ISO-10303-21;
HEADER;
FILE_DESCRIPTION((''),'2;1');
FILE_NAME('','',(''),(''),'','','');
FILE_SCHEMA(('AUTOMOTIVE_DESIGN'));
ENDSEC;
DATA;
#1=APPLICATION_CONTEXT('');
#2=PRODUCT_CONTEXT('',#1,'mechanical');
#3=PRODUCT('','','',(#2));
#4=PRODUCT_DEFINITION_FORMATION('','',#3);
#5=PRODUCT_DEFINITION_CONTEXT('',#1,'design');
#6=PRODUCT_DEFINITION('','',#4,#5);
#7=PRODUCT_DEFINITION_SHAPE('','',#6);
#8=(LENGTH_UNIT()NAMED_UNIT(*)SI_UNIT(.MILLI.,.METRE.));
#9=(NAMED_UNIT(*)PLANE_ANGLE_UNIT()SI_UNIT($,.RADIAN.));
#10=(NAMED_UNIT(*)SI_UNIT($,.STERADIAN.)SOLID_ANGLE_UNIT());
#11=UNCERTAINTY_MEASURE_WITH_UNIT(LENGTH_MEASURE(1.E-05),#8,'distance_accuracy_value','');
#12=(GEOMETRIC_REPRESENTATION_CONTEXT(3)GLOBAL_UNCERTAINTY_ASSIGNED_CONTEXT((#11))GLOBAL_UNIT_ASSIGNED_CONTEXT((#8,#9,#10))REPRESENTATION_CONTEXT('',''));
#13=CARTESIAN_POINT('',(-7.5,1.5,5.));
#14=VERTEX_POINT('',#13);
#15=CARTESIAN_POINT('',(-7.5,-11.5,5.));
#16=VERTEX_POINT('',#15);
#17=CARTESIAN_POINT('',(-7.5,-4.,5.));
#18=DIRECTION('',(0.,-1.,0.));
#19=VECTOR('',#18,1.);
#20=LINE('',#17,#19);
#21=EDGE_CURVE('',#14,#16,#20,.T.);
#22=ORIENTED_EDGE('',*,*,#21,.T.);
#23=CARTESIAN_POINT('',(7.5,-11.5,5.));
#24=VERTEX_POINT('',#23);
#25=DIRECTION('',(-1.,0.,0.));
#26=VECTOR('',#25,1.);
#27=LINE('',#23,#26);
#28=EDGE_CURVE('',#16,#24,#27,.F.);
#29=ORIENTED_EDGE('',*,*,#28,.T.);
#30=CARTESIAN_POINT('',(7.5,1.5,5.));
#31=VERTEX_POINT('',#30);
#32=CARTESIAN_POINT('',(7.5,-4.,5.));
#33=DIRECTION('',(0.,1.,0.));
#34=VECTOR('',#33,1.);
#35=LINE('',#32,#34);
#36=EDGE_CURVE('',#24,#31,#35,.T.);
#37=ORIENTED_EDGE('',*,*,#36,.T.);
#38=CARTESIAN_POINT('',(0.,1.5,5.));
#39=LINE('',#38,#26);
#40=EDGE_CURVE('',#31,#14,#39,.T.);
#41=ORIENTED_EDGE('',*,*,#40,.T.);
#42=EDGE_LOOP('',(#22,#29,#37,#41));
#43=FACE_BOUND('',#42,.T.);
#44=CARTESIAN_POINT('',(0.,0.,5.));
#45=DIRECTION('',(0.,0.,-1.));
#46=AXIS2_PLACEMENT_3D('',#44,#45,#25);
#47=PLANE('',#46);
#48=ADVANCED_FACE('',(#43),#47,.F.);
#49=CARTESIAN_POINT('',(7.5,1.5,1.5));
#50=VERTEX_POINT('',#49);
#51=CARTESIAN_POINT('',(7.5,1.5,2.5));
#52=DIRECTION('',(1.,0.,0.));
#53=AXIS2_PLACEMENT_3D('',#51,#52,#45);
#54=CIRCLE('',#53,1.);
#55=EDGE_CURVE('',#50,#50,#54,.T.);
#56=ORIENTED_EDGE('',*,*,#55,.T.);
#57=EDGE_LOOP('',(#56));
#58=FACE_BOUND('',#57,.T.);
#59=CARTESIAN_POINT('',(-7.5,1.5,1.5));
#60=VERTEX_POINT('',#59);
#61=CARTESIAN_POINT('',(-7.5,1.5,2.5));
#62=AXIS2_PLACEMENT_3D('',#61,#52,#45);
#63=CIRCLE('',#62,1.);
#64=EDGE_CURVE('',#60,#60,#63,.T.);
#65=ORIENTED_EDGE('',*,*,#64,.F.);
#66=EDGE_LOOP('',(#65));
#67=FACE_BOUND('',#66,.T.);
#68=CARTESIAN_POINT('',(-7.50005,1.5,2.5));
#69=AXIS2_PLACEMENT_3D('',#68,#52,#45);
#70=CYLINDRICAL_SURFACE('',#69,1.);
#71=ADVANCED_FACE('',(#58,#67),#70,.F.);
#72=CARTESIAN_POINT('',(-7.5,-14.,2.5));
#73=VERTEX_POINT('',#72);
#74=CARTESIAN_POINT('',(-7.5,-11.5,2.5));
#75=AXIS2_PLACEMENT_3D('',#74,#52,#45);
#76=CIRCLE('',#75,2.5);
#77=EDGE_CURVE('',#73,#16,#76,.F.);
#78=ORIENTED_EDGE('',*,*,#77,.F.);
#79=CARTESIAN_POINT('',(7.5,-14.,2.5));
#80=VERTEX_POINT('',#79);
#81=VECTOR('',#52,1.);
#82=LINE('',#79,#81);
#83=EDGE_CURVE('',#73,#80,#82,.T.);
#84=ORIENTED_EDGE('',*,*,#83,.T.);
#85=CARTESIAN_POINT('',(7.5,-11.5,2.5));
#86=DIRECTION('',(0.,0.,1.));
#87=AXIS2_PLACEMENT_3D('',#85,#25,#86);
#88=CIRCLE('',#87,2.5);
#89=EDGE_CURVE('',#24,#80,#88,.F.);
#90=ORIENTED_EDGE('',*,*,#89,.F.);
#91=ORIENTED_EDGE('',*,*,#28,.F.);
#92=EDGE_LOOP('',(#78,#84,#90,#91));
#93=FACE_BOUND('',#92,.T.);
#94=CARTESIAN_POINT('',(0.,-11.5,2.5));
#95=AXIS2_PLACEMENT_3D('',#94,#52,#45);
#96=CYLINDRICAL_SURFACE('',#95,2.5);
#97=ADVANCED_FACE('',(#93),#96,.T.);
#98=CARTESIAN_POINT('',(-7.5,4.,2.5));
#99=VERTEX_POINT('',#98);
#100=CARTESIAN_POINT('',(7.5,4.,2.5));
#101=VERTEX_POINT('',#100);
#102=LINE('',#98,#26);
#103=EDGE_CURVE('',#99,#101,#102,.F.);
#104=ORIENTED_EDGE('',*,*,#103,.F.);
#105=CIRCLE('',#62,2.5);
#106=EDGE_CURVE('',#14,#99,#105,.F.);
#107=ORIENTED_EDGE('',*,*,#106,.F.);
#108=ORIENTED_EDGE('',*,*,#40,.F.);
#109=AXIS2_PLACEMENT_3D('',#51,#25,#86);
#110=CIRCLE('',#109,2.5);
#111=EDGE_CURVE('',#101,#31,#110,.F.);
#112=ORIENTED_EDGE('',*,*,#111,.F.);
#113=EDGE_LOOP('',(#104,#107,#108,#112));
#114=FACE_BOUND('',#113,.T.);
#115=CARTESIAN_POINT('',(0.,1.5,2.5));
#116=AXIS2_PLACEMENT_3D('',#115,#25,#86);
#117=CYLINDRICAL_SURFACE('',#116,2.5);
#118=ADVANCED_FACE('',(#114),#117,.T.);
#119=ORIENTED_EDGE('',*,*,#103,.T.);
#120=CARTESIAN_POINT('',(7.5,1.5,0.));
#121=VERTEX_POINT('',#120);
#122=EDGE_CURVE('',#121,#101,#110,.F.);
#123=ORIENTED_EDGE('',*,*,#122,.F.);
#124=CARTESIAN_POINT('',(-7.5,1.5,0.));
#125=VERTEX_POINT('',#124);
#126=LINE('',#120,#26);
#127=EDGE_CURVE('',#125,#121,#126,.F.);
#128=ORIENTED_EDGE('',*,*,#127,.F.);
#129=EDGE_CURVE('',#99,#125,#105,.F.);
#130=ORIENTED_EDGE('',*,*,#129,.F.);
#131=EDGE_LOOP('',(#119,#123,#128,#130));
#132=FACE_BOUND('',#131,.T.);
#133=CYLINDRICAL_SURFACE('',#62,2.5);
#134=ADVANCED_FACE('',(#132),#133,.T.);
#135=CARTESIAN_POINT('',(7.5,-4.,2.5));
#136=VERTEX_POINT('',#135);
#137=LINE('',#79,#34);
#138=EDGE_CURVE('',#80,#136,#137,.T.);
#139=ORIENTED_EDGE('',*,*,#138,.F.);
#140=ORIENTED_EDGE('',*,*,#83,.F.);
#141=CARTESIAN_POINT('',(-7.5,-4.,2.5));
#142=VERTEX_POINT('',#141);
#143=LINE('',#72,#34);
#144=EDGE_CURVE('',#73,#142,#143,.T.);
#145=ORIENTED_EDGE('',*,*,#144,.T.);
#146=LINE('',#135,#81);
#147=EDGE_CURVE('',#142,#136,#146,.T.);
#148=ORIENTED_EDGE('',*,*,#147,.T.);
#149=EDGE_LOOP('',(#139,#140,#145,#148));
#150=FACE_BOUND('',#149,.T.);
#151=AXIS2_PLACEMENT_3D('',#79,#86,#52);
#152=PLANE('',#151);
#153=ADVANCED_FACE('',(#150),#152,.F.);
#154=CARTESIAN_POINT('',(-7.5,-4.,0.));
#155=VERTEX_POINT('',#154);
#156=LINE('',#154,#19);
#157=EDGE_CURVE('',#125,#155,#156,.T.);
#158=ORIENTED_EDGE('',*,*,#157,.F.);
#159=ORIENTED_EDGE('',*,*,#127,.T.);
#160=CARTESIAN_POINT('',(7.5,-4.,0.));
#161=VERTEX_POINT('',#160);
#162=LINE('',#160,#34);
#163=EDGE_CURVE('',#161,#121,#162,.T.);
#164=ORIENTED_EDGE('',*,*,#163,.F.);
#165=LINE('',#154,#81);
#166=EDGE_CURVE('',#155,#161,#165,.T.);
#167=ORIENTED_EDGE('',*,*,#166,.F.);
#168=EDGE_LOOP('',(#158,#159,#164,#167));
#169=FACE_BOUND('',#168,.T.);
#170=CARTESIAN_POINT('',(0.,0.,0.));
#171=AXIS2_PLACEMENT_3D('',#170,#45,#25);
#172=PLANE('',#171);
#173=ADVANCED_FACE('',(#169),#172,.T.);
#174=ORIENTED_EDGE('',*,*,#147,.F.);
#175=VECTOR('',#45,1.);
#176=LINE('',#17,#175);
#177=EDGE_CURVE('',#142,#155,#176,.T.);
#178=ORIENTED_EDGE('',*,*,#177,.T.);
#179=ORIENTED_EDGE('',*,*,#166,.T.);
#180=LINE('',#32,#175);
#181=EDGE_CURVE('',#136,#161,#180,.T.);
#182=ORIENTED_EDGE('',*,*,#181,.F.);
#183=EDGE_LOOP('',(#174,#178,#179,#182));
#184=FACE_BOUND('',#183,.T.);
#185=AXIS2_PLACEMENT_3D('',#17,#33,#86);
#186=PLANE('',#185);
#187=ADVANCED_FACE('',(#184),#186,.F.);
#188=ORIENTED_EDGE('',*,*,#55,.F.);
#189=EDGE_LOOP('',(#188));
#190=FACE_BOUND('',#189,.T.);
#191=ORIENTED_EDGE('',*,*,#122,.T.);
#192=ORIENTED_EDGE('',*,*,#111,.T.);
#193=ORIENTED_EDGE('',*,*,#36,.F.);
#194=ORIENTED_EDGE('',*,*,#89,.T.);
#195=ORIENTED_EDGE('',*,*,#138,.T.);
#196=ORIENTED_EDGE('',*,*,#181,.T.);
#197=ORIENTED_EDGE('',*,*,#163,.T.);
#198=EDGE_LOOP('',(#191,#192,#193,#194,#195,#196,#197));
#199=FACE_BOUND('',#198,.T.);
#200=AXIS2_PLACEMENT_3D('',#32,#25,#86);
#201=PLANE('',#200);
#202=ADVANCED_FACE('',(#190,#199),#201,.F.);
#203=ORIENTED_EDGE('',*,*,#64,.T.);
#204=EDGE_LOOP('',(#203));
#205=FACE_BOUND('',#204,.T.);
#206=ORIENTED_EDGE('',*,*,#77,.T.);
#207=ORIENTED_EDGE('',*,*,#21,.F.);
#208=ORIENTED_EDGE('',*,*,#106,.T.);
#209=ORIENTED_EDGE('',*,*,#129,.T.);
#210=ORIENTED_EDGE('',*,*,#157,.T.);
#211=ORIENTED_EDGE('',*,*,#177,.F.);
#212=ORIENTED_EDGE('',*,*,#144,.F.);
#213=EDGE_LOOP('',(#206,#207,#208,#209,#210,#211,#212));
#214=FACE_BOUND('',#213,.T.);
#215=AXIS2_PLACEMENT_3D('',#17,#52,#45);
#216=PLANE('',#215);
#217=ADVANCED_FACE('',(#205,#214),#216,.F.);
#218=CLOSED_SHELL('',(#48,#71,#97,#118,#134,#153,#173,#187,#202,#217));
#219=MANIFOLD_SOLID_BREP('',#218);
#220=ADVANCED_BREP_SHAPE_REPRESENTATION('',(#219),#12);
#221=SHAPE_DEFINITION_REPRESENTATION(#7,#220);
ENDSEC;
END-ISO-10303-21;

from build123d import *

# Parameters (mm, degrees)
SKETCH1_W           = 15
SKETCH1_H           = 8
BOSS_EXTRUDE1_DEPTH = 5
SKETCH2_W           = 15
SKETCH2_H           = 2.5
BOSS_EXTRUDE2_DEPTH = 10
SKETCH4_R           = 1
CUT_EXTRUDE1_DEPTH  = 22.118712082
FILLET1_R           = 2.5


with BuildPart() as part:
    # Sketch1 → Boss-Extrude1 (new body)
    with BuildSketch(Plane.XY):
        Rectangle(SKETCH1_W, SKETCH1_H)
    extrude(amount=BOSS_EXTRUDE1_DEPTH)

    # Sketch2 → Boss-Extrude2 (add)
    with BuildSketch(Plane.XZ.offset(4)):
        with Locations((0, 3.75)):
            Rectangle(SKETCH2_W, SKETCH2_H)
    extrude(amount=BOSS_EXTRUDE2_DEPTH)

    # Sketch4 → Cut-Extrude1 (cut, through all)
    with BuildSketch(Plane(origin=(7.5, 0, 0), x_dir=(0, 0, -1), z_dir=(1, 0, 0))):
        with Locations((-2.5, 1.5)):
            Circle(SKETCH4_R)
    extrude(amount=-CUT_EXTRUDE1_DEPTH, mode=Mode.SUBTRACT)

    # Fillet1
    fillet1_edges = [part.edges().sort_by_distance(p)[0] for p in [
        (0, -14, 5),
        (0, 4, 0),
        (0, 4, 5),
    ]]
    fillet(fillet1_edges, radius=FILLET1_R - 0.0001)  # a hair under: the kernel refuses the full size


solid = part.part
